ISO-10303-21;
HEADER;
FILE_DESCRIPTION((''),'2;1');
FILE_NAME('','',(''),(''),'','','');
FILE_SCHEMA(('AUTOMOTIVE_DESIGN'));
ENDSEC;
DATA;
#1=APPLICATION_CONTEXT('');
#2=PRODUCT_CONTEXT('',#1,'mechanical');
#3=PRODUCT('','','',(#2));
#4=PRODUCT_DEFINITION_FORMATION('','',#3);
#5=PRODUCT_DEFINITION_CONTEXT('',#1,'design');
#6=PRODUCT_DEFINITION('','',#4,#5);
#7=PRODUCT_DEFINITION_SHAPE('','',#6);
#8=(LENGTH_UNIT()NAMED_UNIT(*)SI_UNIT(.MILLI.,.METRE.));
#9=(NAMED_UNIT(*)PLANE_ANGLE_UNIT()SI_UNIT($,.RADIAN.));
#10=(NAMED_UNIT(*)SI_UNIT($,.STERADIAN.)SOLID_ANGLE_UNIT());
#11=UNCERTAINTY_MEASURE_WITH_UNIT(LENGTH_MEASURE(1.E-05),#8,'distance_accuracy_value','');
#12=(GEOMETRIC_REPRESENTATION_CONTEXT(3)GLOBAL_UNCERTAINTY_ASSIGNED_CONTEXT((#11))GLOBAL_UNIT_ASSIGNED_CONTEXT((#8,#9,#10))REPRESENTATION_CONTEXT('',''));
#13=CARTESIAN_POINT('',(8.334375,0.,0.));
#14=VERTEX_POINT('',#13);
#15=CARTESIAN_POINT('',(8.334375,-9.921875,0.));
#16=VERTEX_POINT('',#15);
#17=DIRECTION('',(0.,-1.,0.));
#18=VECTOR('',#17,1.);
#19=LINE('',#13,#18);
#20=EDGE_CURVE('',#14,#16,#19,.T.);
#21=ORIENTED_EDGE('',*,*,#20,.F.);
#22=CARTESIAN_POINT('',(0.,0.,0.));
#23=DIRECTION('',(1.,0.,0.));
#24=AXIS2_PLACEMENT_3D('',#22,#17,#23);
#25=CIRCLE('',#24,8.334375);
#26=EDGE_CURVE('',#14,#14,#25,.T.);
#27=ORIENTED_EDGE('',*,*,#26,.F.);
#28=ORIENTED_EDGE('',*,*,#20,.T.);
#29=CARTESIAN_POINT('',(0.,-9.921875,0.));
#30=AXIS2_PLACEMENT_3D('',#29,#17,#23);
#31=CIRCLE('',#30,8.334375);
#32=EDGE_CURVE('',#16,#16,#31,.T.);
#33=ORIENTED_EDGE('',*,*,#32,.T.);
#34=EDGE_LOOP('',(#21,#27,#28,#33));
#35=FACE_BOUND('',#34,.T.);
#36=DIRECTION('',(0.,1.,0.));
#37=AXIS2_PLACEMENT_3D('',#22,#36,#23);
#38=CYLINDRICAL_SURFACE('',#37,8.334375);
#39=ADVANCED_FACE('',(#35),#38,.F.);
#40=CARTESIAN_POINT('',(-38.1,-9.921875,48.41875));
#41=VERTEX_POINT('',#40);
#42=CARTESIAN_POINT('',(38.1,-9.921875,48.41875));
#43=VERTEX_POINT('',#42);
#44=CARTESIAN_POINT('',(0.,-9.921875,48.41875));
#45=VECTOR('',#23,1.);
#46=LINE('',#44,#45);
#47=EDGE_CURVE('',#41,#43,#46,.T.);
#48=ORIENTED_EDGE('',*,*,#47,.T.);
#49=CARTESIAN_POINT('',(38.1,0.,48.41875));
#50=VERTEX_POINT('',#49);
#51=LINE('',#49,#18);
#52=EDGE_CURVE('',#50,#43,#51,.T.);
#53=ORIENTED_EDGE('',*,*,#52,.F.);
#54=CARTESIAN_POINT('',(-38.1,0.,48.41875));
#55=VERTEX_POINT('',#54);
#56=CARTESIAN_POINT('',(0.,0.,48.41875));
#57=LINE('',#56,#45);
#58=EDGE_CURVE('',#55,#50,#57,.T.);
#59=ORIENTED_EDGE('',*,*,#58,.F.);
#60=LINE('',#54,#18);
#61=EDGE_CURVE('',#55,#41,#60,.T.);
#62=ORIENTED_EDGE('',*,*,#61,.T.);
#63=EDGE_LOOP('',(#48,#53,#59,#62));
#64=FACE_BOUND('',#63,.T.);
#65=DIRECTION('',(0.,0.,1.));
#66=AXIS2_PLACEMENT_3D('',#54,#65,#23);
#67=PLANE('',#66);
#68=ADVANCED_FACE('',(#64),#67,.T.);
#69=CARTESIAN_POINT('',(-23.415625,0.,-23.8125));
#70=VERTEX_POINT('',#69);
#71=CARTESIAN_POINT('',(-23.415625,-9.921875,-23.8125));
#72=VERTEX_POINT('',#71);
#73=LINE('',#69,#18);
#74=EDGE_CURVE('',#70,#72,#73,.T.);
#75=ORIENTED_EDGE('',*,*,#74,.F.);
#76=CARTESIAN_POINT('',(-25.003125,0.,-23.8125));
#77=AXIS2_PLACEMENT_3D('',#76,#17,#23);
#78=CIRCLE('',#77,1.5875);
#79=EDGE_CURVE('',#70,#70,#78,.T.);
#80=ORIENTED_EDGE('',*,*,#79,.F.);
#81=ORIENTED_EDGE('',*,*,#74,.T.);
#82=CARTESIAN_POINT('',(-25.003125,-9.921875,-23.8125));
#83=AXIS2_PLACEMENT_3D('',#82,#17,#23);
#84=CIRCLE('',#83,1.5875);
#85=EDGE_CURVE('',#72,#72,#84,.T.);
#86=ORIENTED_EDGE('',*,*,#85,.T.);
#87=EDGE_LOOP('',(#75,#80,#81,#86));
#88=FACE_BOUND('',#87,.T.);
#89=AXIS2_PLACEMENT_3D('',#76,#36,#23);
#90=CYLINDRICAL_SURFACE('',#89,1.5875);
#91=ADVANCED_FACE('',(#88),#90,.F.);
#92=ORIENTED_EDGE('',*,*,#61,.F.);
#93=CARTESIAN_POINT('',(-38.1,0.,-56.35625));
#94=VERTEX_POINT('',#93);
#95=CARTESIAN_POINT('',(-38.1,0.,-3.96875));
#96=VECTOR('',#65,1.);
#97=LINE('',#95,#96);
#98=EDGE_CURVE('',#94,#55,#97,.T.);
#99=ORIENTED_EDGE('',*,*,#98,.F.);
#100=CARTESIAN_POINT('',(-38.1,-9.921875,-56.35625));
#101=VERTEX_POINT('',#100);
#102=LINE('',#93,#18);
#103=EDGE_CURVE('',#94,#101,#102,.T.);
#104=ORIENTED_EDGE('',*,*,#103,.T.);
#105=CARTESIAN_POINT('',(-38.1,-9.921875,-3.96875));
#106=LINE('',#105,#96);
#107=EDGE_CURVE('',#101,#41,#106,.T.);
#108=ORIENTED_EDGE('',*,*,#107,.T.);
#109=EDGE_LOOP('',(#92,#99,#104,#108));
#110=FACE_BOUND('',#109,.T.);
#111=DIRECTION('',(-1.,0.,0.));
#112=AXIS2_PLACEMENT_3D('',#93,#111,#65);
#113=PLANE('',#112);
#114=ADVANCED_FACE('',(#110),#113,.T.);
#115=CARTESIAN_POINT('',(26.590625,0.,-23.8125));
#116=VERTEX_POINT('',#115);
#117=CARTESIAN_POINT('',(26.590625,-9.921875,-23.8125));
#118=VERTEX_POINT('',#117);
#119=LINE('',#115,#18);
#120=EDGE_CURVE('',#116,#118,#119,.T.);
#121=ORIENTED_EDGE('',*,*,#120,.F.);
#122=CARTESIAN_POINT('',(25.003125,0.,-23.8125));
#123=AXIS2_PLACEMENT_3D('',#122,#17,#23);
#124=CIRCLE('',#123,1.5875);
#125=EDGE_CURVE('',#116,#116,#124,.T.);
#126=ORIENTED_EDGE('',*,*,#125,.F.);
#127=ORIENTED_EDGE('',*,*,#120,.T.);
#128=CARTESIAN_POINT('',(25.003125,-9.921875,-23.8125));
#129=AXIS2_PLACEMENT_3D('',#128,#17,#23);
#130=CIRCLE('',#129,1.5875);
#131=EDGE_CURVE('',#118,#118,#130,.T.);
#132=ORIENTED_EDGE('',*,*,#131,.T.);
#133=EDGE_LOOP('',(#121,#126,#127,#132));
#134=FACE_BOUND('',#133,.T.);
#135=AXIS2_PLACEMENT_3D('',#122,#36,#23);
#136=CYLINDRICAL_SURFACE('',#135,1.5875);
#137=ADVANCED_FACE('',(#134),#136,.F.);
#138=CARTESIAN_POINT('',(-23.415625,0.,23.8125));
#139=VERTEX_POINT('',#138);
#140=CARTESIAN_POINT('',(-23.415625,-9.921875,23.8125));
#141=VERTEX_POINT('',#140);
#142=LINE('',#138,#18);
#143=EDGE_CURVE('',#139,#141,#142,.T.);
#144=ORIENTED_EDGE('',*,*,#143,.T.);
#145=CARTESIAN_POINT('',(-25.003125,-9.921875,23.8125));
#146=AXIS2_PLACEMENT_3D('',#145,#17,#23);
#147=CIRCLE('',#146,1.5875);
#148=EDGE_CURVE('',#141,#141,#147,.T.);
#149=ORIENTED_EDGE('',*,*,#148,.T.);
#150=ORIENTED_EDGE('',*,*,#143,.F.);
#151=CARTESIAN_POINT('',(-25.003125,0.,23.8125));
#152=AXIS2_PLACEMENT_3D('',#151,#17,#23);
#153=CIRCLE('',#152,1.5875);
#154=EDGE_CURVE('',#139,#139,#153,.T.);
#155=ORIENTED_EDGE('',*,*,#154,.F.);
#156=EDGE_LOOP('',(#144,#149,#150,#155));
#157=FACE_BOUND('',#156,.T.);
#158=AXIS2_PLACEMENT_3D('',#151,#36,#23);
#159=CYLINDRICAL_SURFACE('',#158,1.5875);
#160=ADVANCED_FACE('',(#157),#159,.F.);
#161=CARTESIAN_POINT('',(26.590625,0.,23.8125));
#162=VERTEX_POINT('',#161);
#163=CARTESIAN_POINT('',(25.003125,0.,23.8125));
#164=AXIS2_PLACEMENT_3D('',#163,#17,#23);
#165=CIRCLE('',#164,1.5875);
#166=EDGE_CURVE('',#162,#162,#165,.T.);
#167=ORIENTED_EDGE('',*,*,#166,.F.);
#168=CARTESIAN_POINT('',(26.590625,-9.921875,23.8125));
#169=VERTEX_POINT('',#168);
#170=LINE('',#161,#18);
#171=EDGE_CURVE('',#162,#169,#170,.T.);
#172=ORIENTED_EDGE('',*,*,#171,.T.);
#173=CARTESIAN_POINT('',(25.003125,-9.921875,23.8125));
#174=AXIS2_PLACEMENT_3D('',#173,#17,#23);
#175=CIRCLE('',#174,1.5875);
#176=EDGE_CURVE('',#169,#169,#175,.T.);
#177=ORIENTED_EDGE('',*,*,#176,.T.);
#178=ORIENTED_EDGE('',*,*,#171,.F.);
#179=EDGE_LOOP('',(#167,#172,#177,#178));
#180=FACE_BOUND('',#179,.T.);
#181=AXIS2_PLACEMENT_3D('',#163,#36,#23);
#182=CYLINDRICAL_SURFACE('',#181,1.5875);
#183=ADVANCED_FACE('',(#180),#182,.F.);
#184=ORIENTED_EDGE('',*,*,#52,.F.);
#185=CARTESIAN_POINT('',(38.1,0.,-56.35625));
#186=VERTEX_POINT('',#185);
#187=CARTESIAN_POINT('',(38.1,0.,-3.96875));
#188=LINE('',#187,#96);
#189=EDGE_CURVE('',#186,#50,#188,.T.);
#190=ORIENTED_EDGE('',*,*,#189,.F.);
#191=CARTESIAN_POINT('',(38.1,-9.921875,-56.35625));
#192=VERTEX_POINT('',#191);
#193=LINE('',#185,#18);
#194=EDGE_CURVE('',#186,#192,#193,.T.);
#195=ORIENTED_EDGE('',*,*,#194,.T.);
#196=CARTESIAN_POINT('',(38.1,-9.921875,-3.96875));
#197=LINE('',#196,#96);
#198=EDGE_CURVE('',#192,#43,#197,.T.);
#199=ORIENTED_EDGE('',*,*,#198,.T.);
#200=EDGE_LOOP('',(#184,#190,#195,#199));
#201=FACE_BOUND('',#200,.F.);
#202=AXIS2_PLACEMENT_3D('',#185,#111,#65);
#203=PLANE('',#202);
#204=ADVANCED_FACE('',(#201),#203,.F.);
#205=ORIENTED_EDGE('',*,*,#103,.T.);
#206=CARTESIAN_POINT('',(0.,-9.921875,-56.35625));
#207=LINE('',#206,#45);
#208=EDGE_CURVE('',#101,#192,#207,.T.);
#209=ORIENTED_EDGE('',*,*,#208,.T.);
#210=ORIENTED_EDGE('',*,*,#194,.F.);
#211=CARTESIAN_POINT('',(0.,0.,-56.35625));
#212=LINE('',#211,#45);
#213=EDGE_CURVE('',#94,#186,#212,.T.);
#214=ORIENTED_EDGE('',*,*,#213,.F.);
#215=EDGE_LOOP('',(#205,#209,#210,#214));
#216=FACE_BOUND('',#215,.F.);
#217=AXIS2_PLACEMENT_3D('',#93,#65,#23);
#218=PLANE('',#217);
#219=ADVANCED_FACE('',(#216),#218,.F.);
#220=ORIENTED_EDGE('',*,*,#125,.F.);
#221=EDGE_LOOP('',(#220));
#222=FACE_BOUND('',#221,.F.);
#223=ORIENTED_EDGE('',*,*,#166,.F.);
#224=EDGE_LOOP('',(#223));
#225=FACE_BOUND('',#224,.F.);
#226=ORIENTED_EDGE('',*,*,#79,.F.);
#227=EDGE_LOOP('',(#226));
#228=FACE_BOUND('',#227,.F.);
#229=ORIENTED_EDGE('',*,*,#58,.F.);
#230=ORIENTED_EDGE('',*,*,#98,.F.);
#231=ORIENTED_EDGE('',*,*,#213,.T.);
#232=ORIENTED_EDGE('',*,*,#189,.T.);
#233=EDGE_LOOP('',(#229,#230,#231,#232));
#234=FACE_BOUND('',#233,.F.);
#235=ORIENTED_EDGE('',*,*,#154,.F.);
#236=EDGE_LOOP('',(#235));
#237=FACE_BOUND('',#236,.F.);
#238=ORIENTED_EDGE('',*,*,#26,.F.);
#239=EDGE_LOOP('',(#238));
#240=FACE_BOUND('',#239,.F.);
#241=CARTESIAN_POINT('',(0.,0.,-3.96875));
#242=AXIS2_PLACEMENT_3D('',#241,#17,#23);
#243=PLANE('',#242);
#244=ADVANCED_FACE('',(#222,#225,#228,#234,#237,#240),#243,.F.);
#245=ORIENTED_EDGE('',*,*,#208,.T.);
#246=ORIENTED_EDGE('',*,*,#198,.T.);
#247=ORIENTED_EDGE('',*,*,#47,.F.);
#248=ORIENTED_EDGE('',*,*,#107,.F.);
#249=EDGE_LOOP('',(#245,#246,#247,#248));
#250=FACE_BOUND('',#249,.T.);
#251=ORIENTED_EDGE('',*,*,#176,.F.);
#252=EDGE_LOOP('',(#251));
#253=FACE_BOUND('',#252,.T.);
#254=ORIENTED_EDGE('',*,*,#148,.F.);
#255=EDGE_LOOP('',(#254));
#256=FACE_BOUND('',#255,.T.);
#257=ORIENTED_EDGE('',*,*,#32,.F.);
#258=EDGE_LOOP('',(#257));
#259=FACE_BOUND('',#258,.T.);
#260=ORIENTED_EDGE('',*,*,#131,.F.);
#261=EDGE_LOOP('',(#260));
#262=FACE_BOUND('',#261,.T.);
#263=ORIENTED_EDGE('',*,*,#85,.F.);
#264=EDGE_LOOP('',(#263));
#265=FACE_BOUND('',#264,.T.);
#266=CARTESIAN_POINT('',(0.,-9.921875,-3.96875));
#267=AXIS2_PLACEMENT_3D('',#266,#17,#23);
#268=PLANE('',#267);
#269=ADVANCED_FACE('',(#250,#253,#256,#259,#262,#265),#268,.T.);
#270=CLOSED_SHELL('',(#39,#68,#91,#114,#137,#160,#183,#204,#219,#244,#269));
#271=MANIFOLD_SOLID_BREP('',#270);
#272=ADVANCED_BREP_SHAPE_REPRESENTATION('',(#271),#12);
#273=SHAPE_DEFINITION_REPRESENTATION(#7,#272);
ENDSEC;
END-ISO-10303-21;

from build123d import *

# Parameters (mm, degrees)
F0_W     = 76.2
F0_H     = 104.775
F0_R     = 1.5875
F0_R_2   = 8.334375
F1_DEPTH = 9.921875


# Not quite as in the source:
# - a length typed as a fraction of an inch, garbled in the dataset ("3 / 203.2 mm" for 3/8 in), is restored


with BuildPart() as f1:
    # F0 (on Front) → F1 (new body)
    with BuildSketch(Plane.XZ):
        with Locations((0, -3.96875)):
            Rectangle(F0_W, F0_H)
        with Locations((-25.003125, -23.8125)):
            Circle(F0_R, mode=Mode.SUBTRACT)
        with Locations((25.003125, -23.8125)):
            Circle(F0_R, mode=Mode.SUBTRACT)
        with Locations((-25.003125, 23.8125)):
            Circle(F0_R, mode=Mode.SUBTRACT)
        Circle(F0_R_2, mode=Mode.SUBTRACT)
        with Locations((25.003125, 23.8125)):
            Circle(F0_R, mode=Mode.SUBTRACT)
    extrude(amount=F1_DEPTH)


solid = f1.part
